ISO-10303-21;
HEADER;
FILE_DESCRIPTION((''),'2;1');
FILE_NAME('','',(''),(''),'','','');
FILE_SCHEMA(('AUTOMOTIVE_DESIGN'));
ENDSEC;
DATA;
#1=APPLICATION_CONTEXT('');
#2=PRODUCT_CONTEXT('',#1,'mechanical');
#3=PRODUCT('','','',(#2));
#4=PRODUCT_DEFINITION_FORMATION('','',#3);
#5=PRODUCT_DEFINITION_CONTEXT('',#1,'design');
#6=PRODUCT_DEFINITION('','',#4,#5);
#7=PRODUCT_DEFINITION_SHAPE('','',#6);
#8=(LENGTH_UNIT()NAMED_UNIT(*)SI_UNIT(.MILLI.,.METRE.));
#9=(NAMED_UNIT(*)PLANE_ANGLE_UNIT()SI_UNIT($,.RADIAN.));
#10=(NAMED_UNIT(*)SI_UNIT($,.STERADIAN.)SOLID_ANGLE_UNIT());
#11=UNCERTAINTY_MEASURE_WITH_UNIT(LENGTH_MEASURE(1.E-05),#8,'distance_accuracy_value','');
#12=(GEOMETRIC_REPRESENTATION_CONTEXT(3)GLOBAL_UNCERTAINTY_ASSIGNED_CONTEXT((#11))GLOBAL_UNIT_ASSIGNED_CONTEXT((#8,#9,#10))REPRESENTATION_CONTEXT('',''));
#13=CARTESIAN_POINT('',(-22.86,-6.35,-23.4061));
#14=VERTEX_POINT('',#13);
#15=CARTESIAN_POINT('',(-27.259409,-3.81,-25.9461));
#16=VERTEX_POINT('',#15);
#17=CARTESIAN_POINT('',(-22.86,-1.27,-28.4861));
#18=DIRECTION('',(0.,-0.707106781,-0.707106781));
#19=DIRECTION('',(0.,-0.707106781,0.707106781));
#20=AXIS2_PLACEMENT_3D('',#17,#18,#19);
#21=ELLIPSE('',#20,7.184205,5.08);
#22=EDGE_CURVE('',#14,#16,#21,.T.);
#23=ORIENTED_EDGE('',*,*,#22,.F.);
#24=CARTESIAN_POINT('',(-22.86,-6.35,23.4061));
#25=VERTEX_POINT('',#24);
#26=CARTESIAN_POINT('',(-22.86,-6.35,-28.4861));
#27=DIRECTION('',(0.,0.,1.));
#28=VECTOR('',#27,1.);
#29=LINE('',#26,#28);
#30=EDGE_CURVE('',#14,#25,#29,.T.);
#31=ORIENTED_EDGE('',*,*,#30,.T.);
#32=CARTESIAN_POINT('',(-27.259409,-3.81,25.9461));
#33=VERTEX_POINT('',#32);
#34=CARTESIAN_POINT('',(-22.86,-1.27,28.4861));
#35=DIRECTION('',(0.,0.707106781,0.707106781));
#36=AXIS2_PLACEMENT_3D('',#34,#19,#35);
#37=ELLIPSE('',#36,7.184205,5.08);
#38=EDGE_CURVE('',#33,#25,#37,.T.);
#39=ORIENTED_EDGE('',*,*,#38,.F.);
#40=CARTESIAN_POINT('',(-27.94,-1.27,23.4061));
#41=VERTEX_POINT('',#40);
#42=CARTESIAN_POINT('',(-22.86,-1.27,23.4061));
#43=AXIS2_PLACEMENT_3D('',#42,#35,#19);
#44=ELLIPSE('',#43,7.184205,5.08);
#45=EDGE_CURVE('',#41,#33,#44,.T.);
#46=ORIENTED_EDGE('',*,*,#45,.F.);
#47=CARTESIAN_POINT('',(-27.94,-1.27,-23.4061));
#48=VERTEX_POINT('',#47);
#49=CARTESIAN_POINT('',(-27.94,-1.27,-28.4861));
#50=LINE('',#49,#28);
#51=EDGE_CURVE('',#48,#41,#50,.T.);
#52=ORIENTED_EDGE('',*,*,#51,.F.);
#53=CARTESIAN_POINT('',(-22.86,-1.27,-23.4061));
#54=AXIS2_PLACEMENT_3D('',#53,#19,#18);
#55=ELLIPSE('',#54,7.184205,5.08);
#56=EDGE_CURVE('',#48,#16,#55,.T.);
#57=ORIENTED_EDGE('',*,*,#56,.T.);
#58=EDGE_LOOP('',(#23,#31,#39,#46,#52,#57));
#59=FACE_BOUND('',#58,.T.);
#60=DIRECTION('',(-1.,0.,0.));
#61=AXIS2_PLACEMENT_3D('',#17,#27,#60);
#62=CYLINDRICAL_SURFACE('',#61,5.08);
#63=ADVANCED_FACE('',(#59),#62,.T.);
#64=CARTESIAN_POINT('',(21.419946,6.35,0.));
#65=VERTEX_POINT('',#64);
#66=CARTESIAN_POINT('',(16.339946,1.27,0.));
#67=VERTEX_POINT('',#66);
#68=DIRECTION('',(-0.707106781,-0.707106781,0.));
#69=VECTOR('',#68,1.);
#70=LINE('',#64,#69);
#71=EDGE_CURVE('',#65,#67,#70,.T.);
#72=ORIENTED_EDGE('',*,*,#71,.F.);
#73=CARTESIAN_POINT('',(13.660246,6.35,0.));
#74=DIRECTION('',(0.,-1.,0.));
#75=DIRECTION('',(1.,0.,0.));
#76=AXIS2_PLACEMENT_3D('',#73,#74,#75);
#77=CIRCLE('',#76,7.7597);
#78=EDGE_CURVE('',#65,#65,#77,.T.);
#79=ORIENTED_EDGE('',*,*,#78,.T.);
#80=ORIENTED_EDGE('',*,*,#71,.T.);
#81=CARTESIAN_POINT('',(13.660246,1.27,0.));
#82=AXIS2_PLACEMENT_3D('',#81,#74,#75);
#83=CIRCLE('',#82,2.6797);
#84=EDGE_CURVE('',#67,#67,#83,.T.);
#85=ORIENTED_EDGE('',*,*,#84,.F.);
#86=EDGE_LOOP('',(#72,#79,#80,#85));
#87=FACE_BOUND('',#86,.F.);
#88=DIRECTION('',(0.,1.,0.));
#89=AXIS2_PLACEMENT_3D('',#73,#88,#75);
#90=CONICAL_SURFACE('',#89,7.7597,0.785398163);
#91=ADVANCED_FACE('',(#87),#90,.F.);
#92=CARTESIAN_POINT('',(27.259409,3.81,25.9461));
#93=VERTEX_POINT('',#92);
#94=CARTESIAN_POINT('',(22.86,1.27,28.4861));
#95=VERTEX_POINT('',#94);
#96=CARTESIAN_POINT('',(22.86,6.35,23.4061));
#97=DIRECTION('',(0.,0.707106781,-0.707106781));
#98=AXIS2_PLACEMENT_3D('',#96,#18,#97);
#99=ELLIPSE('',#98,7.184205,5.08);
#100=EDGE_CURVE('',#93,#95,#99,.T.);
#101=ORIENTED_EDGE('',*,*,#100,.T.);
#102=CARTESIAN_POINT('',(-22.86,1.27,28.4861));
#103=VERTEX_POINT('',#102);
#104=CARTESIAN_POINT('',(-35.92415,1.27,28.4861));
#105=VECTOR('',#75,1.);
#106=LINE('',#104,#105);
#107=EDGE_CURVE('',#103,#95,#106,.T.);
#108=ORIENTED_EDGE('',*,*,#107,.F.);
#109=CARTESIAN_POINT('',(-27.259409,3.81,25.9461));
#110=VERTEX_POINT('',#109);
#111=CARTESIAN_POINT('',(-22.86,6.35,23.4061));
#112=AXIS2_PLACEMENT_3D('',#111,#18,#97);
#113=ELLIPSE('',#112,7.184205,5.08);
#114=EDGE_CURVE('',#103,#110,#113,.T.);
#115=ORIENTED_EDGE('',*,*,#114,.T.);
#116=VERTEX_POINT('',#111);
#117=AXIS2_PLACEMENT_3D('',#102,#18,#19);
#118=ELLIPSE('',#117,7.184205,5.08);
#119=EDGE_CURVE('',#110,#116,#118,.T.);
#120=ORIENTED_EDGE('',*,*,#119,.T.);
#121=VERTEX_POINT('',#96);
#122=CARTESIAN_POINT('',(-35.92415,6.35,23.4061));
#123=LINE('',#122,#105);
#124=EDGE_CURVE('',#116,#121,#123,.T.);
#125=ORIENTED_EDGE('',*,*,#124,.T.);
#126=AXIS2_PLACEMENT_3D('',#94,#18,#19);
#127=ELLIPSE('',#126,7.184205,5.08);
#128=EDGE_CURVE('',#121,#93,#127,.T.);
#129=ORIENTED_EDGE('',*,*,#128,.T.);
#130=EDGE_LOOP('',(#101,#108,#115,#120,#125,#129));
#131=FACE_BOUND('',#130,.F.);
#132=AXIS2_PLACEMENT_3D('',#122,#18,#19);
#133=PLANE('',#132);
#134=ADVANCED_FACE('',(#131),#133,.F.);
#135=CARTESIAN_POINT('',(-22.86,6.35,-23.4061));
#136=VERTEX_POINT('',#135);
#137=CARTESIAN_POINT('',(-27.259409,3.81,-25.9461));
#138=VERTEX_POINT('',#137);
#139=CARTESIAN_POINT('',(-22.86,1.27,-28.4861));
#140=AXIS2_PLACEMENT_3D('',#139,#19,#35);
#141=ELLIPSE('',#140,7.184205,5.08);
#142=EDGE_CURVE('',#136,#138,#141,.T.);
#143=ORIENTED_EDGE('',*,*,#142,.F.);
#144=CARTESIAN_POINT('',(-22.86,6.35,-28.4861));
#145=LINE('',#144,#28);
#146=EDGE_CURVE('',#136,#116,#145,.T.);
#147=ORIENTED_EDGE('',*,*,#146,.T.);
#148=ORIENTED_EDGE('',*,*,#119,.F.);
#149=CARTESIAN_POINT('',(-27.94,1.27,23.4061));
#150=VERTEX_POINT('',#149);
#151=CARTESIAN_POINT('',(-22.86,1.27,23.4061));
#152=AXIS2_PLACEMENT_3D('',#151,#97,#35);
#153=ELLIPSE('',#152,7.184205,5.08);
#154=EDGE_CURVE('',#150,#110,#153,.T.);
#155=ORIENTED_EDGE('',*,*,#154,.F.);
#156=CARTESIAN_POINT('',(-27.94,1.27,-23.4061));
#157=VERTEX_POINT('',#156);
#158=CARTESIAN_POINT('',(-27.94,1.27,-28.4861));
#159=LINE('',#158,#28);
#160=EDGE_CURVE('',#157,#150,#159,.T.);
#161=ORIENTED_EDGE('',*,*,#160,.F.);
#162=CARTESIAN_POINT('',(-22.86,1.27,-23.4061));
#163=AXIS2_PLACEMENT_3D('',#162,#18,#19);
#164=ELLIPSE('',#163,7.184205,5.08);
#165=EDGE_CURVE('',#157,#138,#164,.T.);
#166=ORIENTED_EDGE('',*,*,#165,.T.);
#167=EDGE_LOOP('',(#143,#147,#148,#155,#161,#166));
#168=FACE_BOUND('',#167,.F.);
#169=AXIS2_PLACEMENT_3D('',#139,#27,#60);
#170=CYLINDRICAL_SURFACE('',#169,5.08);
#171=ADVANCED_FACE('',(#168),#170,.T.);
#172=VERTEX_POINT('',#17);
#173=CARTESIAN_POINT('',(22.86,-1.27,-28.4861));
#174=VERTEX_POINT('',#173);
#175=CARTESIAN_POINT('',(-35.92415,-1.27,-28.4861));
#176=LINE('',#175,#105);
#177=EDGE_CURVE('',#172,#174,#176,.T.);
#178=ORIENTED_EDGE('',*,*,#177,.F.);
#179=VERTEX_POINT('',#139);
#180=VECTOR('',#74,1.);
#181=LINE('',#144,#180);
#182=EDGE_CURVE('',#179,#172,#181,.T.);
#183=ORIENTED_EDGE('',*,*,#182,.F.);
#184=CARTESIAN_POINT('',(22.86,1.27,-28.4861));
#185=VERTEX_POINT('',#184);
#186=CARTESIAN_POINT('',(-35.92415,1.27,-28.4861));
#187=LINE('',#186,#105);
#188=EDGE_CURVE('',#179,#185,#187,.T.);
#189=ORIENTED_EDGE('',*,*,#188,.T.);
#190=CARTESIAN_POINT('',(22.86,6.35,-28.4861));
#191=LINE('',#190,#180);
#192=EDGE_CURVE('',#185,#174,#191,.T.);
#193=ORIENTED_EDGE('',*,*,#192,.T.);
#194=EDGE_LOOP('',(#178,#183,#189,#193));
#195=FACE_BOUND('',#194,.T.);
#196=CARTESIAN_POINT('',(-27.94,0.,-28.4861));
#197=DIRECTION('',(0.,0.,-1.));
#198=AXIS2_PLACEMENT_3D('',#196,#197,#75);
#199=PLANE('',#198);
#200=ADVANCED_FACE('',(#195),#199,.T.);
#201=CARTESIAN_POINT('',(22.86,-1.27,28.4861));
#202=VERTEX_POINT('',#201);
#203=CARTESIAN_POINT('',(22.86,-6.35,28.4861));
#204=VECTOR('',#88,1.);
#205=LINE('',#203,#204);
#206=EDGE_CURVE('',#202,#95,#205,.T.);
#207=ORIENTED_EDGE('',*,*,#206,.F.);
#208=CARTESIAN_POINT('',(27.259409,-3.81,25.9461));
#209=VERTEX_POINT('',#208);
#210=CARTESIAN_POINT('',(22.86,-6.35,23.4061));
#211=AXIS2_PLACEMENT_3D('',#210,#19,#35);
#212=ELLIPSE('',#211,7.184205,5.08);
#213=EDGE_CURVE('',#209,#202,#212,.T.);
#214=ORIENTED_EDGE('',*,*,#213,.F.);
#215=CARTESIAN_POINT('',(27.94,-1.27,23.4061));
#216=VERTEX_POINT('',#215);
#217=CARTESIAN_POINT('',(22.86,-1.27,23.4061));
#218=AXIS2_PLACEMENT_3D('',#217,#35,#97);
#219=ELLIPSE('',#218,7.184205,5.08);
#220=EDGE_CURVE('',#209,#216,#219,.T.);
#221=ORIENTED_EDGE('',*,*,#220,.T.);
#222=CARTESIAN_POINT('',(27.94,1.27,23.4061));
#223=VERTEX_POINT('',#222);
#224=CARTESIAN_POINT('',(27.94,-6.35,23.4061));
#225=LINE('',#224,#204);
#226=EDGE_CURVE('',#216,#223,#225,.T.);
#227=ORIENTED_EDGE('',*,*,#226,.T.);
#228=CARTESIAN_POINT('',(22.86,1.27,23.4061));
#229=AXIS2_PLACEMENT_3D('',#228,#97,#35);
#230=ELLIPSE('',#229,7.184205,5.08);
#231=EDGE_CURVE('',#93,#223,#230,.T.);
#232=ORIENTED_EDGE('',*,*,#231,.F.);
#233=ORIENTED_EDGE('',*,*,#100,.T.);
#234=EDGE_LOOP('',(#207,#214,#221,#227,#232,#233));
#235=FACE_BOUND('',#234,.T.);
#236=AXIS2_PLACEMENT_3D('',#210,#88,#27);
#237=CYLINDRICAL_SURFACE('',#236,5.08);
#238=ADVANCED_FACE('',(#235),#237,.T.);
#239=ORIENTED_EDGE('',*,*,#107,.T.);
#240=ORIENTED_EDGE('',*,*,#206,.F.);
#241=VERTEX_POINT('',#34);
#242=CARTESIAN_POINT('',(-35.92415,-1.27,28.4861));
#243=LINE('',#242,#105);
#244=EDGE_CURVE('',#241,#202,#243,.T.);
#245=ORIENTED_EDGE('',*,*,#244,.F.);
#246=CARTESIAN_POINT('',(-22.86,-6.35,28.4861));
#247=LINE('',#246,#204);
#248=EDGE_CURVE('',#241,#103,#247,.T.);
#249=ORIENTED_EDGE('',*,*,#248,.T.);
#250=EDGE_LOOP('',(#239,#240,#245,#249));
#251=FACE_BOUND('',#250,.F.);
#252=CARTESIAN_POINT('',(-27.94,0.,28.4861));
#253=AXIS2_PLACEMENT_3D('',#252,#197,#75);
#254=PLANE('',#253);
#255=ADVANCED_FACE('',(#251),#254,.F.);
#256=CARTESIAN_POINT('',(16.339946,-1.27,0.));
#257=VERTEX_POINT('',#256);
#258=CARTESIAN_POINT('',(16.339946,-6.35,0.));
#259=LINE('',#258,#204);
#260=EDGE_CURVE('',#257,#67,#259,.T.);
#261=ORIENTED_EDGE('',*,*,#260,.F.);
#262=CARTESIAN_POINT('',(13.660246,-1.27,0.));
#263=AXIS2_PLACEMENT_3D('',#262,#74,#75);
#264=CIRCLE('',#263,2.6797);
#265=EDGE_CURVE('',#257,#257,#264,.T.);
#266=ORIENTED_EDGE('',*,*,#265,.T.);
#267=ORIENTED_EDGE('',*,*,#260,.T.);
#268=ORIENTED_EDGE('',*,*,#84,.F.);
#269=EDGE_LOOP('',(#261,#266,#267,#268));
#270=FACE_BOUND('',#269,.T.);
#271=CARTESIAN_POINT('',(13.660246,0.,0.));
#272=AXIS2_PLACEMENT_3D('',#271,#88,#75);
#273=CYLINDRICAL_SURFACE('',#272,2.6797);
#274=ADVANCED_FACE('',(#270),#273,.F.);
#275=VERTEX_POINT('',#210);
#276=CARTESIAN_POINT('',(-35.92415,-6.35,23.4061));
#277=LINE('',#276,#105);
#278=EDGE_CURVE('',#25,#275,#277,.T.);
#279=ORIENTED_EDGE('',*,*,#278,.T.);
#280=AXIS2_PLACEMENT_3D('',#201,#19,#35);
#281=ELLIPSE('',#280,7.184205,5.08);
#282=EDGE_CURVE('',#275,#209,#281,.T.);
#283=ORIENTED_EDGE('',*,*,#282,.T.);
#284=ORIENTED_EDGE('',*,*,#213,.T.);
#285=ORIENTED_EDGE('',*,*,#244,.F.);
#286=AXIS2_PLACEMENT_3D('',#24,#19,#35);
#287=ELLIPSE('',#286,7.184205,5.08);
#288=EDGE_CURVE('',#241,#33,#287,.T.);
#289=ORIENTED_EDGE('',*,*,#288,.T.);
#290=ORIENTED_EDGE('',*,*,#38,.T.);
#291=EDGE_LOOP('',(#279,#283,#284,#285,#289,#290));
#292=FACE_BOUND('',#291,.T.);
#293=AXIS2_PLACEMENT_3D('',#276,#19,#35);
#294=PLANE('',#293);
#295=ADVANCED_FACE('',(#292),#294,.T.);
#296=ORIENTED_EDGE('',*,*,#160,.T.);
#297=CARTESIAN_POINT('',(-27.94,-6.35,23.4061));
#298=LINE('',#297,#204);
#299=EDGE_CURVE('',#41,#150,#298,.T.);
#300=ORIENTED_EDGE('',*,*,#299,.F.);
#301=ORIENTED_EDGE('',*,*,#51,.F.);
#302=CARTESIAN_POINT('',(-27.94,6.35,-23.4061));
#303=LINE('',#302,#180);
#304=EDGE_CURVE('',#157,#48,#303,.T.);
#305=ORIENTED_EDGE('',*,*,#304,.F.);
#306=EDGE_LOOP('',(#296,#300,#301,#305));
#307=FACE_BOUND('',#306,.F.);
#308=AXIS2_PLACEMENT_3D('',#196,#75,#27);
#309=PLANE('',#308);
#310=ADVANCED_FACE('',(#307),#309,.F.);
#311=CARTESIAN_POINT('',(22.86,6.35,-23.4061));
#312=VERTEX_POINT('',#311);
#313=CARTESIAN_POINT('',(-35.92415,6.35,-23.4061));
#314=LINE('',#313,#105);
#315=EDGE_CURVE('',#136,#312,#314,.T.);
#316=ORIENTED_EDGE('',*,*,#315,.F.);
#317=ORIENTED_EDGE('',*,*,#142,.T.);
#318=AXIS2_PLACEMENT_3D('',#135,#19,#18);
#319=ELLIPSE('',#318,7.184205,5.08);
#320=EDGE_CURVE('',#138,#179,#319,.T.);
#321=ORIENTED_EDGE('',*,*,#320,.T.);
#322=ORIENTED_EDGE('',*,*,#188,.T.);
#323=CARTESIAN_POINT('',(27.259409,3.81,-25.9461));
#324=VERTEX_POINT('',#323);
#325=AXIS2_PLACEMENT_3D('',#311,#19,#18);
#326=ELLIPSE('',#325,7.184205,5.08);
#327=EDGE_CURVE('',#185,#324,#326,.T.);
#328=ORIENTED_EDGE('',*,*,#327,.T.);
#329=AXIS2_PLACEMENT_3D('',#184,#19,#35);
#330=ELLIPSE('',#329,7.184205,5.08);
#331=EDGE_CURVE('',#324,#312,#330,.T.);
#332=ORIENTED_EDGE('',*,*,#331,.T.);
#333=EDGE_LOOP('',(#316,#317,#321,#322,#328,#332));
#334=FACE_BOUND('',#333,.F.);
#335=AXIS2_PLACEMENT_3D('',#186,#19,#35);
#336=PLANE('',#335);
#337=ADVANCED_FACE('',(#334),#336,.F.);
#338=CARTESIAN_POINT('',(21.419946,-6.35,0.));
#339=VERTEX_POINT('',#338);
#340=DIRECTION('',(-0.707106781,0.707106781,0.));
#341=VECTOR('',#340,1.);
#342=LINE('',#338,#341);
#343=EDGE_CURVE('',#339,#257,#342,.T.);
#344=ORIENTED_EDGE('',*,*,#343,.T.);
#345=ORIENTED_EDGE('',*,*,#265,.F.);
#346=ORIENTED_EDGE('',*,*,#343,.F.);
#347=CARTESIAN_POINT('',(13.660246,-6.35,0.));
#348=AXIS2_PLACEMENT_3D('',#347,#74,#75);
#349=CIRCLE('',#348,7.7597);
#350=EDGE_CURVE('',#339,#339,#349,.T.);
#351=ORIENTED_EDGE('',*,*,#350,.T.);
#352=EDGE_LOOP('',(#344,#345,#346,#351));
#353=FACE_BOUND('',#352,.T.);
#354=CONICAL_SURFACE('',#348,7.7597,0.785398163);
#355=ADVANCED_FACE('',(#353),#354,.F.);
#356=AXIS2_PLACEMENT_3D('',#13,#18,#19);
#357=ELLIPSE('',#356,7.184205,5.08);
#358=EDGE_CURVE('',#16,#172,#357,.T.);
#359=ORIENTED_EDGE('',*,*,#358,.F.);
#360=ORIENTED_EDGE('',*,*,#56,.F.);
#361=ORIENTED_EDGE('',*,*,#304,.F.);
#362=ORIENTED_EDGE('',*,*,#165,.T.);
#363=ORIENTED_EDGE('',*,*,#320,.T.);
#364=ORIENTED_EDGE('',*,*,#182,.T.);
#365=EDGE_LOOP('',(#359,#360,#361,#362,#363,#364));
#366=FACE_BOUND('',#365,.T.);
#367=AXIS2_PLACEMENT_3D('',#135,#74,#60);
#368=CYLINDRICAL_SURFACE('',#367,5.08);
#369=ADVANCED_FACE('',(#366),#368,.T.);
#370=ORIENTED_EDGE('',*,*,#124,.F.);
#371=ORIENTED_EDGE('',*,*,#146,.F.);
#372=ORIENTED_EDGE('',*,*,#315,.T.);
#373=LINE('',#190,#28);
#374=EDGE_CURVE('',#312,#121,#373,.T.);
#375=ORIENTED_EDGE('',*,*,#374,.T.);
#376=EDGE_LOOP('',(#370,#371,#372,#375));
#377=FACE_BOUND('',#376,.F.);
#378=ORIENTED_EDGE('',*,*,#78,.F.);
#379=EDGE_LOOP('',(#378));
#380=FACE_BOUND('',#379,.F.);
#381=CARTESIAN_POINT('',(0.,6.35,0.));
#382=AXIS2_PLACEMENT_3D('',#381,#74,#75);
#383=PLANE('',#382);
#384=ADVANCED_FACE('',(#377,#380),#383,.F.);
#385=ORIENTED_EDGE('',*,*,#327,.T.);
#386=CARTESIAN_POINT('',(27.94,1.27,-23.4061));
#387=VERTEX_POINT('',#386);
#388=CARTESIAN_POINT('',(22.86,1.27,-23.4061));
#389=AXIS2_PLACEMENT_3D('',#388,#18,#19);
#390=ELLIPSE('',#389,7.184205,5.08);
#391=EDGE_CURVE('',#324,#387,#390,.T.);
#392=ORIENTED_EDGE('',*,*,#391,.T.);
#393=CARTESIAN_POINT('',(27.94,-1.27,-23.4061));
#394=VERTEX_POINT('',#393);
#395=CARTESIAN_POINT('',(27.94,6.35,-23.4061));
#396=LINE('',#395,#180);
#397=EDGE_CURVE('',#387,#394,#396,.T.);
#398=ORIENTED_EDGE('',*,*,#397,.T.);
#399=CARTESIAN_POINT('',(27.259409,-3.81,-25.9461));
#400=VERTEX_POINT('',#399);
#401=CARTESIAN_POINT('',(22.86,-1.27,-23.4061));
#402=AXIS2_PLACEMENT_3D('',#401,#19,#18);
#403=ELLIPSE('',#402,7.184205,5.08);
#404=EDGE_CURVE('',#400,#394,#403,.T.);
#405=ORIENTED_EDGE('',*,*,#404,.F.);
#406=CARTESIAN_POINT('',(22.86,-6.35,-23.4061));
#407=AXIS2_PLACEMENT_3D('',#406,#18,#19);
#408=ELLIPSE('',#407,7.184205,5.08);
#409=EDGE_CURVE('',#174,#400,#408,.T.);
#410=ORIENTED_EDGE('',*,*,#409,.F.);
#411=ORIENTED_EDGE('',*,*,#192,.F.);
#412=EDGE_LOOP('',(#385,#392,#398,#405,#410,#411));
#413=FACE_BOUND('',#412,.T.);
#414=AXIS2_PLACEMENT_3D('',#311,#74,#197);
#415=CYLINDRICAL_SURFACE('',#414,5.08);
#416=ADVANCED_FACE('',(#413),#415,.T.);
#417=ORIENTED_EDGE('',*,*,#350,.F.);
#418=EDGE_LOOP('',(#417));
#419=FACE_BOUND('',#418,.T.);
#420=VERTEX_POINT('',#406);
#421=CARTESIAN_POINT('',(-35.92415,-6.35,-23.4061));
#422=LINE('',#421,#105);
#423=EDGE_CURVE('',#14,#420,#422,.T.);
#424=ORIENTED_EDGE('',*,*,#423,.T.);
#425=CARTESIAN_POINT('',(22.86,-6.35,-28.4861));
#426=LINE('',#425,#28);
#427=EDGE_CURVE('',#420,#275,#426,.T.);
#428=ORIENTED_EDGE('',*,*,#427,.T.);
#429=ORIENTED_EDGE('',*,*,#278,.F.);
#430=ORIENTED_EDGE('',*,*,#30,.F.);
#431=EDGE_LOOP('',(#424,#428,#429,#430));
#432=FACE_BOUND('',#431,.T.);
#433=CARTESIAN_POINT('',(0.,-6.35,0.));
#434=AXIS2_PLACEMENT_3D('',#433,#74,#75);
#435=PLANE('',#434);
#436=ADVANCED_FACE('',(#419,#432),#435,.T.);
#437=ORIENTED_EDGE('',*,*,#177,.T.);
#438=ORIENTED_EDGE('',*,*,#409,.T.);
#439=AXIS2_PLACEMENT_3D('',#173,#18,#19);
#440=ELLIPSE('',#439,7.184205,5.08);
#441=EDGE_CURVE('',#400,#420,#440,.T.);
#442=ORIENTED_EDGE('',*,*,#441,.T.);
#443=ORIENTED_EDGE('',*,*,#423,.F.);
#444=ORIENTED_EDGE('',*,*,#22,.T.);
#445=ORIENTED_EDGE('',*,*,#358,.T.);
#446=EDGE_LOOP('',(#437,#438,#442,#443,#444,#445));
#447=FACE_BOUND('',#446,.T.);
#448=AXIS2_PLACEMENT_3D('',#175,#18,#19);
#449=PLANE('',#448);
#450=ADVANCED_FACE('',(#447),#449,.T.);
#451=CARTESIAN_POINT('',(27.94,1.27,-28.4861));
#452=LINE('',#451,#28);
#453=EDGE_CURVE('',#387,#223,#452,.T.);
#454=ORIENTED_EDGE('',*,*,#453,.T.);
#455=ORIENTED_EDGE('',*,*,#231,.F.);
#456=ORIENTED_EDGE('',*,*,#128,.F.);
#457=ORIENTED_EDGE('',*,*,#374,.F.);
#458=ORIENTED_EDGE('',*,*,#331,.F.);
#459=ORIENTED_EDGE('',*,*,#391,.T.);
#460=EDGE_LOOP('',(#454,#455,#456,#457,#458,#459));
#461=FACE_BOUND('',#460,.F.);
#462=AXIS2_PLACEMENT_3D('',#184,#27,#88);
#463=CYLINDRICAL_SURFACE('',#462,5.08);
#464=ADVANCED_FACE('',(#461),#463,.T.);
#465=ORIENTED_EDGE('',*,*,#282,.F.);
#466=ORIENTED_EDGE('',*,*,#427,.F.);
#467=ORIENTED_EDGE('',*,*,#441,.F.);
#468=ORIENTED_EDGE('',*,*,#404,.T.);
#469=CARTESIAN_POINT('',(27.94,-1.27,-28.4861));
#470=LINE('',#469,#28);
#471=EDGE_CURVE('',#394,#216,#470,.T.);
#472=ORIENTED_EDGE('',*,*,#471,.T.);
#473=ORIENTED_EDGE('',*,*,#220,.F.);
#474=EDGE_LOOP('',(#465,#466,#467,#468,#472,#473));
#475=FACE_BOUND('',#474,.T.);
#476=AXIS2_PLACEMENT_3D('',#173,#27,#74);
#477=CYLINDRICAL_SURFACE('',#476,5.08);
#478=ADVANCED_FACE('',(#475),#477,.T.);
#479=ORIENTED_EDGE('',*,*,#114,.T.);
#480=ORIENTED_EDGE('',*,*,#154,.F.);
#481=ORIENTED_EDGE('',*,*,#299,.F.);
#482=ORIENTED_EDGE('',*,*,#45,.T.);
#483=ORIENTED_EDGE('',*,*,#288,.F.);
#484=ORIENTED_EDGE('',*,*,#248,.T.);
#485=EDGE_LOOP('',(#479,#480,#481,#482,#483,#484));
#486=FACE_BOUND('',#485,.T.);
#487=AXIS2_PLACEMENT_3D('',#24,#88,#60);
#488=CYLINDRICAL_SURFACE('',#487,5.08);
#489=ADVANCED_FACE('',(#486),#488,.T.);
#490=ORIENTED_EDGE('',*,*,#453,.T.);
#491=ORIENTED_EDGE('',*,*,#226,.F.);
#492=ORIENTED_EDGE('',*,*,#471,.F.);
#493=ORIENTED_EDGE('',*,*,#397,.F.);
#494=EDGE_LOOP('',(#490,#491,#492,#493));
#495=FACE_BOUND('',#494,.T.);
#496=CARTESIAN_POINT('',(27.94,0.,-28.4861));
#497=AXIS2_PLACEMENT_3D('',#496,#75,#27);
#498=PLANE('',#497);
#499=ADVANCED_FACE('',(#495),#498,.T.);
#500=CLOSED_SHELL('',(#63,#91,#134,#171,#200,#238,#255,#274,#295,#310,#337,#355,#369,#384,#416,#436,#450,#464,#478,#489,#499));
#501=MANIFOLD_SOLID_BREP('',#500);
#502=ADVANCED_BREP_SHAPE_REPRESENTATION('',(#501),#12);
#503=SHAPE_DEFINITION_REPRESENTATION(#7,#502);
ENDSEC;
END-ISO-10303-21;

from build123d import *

# Parameters (mm, degrees)
F0_W        = 55.88
F0_H        = 56.9722
F0_R        = 2.6797
F1_DEPTH    = 6.35
F2_R        = 5.08
F3_R        = 5.08
F4_T1_DEPTH = 71.8482991577
F5_T1_DEPTH = 71.8482991577


# Not quite as in the source:
# - a fillet or chamfer that OpenCascade refuses, or shapes differently, is made with other operations: its cross-section is extruded or revolved along the edge and cut away or added


with BuildPart() as f1:
    # F0 (on Front) → F1 (new body, symmetric)
    with BuildSketch(Plane.XZ):
        Rectangle(F0_W, F0_H)
        with Locations((13.660245575, 0)):
            Circle(F0_R, mode=Mode.SUBTRACT)
    extrude(amount=F1_DEPTH, both=True)

    # F2
    f2_edges = [f1.edges().sort_by_distance(p)[0] for p in [
        (-27.94, 6.35, 0),
        (-27.94, 0, -28.4861),
        (-27.94, -6.35, 0),
        (-27.94, 0, 28.4861),
    ]]
    fillet(f2_edges, radius=F2_R)

    # F3
    f3_edges = [f1.edges().sort_by_distance(p)[0] for p in [
        (27.94, 0, -28.4861),
        (27.94, 6.35, 0),
        (27.94, 0, 28.4861),
        (27.94, -6.35, 0),
    ]]
    fillet(f3_edges, radius=F3_R)

    # F4: chamfer of 5.08 on 5 edges, made by hand

    # F4_s2 → F4_t1 (cut)
    with BuildSketch(Plane.YZ.offset(-35.9241495789)):
        Polygon((-1.27, -28.4861), (-6.35, -23.4061), (-6.35, -28.4861), align=None)
        Polygon((-6.35, 23.4061), (-1.27, 28.4861), (-6.35, 28.4861), align=None)
    extrude(amount=F4_T1_DEPTH, mode=Mode.SUBTRACT)

    # F4_s3 → F4_t4 (revolve, cut)
    with BuildSketch(Plane.XY):
        Polygon((21.419945575, -6.35), (16.339945575, -1.27), (16.339945575, -6.35), align=None)
    revolve(axis=Axis((13.660245575, -6.35, 0), (0, -1, 0)), mode=Mode.SUBTRACT)

    # F5: chamfer of 5.08 on 5 edges, made by hand

    # F5_s2 → F5_t1 (cut)
    with BuildSketch(Plane.YZ.offset(-35.9241495789)):
        Polygon((1.27, -28.4861), (6.35, -23.4061), (6.35, -28.4861), align=None)
        Polygon((6.35, 23.4061), (1.27, 28.4861), (6.35, 28.4861), align=None)
    extrude(amount=F5_T1_DEPTH, mode=Mode.SUBTRACT)

    # F5_s3 → F5_t4 (revolve, cut)
    with BuildSketch(Plane.XY):
        Polygon((21.419945575, 6.35), (16.339945575, 1.27), (16.339945575, 6.35), align=None)
    revolve(axis=Axis((13.660245575, 6.35, 0), (0, -1, 0)), mode=Mode.SUBTRACT)


solid = f1.part
